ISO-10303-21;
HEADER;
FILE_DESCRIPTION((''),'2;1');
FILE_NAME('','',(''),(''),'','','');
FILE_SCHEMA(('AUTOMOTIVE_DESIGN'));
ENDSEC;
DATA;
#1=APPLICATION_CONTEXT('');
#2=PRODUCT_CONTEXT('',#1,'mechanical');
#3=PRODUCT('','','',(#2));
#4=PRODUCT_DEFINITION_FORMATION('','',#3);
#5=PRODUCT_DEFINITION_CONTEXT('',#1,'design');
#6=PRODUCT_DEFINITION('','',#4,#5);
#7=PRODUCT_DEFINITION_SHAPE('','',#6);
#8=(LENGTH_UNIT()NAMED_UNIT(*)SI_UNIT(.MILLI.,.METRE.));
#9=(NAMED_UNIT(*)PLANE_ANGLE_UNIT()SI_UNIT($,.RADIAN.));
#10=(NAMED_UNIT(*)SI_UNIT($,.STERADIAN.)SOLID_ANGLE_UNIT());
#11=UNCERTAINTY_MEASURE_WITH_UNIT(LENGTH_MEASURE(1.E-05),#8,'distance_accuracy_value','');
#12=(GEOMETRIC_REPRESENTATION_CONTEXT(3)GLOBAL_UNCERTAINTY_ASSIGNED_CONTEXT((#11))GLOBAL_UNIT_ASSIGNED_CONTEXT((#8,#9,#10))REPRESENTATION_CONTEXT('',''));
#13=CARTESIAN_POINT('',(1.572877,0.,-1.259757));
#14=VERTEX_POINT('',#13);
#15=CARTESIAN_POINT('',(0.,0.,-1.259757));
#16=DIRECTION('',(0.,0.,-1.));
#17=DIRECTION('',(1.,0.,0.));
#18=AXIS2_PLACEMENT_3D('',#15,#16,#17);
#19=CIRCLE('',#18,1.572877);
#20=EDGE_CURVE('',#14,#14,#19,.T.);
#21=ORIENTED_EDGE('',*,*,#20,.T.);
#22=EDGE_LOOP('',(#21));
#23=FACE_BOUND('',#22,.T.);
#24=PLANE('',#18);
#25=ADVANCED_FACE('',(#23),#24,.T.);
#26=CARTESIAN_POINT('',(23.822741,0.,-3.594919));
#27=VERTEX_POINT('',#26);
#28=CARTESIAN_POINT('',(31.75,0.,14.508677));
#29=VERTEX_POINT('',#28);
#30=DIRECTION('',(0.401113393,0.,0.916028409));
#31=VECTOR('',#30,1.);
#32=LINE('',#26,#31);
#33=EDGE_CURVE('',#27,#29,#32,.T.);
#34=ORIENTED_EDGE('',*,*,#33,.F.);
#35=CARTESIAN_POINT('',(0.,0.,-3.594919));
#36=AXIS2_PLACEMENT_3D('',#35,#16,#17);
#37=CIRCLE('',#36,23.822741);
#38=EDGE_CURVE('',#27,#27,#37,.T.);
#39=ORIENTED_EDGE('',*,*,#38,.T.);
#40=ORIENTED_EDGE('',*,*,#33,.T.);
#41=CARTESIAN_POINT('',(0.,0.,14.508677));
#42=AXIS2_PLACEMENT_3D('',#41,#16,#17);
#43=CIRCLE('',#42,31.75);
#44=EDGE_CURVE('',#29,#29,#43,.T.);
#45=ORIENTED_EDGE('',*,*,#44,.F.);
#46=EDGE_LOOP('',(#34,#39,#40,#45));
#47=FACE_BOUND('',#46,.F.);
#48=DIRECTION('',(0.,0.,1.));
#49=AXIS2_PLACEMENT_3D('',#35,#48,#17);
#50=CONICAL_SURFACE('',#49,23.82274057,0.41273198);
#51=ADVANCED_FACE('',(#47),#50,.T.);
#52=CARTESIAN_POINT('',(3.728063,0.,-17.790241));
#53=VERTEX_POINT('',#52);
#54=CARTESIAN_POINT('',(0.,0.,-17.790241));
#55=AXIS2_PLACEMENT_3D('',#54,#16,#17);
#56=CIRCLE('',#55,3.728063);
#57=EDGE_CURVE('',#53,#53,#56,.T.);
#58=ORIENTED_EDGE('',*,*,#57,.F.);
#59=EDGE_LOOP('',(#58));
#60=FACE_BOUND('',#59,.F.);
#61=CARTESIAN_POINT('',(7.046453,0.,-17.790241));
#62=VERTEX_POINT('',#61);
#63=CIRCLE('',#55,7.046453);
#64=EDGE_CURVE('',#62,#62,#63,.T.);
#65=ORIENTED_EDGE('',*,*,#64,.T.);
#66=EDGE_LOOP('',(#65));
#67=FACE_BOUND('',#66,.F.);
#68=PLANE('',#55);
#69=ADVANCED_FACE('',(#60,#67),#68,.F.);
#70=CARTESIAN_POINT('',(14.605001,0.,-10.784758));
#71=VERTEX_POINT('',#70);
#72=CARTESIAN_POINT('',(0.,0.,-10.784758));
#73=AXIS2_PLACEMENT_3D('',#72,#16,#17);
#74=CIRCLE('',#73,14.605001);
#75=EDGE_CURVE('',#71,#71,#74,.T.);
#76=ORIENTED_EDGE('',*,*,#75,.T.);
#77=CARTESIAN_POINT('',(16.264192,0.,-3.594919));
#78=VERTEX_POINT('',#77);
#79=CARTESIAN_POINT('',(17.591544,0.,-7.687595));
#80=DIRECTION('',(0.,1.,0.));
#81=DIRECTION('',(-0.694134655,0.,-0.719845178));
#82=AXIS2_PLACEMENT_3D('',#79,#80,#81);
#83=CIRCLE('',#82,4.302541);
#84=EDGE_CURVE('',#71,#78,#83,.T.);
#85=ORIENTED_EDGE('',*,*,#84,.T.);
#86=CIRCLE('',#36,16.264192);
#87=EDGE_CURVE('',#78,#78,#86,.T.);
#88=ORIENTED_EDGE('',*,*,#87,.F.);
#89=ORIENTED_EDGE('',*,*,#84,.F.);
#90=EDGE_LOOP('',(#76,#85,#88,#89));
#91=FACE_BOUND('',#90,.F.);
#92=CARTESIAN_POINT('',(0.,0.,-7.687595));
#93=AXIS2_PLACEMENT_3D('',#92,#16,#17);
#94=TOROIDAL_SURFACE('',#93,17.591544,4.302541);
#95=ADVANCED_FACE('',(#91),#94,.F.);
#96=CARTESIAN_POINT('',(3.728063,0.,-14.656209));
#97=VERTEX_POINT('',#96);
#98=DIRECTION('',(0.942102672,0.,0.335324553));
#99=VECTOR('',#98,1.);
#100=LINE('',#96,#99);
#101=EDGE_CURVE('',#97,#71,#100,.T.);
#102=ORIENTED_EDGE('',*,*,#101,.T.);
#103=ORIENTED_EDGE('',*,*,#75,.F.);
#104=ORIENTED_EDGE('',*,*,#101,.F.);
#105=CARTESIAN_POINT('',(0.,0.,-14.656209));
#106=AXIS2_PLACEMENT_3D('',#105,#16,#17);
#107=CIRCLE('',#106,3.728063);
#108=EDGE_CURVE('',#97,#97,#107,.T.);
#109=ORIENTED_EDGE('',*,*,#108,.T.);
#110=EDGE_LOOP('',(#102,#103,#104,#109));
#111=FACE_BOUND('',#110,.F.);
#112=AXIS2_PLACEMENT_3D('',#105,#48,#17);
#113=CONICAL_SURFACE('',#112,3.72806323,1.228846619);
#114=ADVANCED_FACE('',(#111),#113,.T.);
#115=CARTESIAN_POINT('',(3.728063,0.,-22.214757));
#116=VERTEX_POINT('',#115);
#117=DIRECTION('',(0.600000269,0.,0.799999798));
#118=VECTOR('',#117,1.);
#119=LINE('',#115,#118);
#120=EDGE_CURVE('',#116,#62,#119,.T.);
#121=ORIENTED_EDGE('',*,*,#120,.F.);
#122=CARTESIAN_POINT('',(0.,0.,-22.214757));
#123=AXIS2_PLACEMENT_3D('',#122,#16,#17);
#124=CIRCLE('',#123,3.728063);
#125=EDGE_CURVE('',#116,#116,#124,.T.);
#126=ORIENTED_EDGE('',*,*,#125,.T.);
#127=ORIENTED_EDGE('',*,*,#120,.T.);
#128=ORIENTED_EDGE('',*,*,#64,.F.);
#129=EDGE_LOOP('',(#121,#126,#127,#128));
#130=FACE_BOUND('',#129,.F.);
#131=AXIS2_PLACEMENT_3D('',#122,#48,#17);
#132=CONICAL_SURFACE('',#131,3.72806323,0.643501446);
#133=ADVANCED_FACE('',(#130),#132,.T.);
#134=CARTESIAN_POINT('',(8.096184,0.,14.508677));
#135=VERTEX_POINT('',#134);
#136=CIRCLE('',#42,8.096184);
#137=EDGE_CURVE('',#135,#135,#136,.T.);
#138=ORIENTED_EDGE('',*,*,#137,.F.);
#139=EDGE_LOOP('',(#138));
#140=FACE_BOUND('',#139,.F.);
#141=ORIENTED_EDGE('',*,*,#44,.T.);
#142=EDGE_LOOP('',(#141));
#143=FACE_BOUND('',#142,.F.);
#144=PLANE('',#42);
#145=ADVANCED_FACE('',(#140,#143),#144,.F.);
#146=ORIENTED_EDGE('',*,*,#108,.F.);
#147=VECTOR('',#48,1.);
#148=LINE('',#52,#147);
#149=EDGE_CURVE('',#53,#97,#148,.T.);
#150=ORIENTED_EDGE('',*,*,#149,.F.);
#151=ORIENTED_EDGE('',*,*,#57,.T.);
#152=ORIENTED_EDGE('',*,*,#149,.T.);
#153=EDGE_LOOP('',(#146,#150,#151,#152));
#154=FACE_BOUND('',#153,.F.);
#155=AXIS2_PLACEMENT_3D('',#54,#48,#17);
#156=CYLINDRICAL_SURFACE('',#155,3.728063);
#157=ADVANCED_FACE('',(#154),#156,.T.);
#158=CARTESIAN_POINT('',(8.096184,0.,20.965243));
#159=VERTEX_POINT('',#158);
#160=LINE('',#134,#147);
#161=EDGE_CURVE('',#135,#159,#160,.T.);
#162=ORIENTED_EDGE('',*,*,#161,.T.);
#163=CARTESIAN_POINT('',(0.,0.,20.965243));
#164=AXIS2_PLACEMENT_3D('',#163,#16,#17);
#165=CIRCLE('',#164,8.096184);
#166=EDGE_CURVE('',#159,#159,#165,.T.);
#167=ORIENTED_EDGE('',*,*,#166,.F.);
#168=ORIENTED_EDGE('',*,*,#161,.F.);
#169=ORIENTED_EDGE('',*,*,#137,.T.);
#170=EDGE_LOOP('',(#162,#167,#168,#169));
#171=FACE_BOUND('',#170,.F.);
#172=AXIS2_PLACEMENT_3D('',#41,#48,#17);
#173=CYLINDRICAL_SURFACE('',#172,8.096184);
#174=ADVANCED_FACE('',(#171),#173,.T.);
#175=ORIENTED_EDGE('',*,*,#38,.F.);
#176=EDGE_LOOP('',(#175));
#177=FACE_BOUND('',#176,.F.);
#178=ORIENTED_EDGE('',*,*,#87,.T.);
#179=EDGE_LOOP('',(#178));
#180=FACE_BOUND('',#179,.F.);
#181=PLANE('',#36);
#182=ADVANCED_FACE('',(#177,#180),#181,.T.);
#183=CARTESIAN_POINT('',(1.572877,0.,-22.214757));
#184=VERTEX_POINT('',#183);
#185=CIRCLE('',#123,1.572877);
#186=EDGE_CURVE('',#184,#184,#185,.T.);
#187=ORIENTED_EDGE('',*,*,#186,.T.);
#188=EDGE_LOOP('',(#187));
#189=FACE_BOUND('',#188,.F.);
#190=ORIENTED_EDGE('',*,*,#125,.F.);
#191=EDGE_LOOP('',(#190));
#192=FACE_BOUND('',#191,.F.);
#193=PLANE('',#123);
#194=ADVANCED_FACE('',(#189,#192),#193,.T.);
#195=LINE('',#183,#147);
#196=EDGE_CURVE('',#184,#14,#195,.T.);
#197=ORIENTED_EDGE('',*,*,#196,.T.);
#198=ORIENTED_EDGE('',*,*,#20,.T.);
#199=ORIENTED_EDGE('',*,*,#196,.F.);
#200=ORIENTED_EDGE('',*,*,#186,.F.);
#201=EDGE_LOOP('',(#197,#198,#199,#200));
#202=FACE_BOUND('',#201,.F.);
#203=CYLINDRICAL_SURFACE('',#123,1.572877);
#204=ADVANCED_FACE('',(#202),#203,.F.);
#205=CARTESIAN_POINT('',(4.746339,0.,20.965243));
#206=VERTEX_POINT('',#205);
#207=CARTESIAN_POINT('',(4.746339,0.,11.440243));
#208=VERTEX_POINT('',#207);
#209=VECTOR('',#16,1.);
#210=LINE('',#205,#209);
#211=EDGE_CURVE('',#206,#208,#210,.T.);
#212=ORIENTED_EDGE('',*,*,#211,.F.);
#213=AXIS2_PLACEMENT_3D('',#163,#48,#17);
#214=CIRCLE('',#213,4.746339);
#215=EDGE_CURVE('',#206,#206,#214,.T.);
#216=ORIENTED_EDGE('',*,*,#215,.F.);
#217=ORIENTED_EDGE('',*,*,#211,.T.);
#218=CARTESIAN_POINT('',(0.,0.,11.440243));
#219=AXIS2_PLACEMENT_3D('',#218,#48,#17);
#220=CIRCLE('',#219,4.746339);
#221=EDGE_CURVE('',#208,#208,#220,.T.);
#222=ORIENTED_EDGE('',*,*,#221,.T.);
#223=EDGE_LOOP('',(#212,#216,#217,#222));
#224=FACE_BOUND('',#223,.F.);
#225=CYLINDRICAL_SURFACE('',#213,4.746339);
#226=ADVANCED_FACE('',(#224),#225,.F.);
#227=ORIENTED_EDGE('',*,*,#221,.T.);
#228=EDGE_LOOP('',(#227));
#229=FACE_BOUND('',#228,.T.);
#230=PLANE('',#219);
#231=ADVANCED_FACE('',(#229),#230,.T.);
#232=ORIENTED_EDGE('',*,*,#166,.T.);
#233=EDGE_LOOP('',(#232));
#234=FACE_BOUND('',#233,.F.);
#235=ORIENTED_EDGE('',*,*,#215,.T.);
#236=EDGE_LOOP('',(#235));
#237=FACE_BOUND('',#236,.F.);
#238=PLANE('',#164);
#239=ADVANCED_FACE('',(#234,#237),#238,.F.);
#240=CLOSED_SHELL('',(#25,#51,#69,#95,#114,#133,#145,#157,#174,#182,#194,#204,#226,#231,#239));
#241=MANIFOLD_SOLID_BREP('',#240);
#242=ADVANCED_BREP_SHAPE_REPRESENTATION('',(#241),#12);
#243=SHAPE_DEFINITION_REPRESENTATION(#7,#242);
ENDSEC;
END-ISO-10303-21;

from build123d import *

# Parameters (mm, degrees)
F2_R     = 1.5728770132
F3_DEPTH = 20.955
F4_R     = 4.7463390005
F5_DEPTH = 9.525


# Not quite as in the source:
# - a feature names something its author has since deleted; it is built from what else it names


with BuildPart() as f1:
    # F0 (on Front) → F1 (revolve)
    with BuildSketch(Plane.XZ):
        with BuildLine():
            Line((0, 20.9652427214), (0, 6.7289513536))
            Line((0, 6.7289513536), (0, -22.2147572786))
            Line((0, -22.2147572786), (3.7280632295, -22.2147572786))
            Line((3.7280632295, -22.2147572786), (7.0464526415, -17.7902411669))
            Line((7.0464526415, -17.7902411669), (3.7280632295, -17.7902411669))
            Line((3.7280632295, -17.7902411669), (3.7280632295, -14.6562093869))
            Line((3.7280632295, -14.6562093869), (14.6050014645, -10.7847582549))
            ThreePointArc((14.6050014645, -10.7847582549), (13.3991858149, -6.7201295533), (16.2641917467, -3.5949193407))
            Line((16.2641917467, -3.5949193407), (23.8227405697, -3.5949193407))
            Line((23.8227405697, -3.5949193407), (31.75, 14.5086767152))
            Line((31.75, 14.5086767152), (14.6050014645, 14.5086767152))
            Line((14.6050014645, 14.5086767152), (8.0961844996, 14.5086767152))
            Line((8.0961844996, 14.5086767152), (8.0961844996, 20.9652427214))
            Line((8.0961844996, 20.9652427214), (0, 20.9652427214))
        make_face()
    revolve(axis=Axis((0, 0, -7.7429029625), (0, 0, -1)))

    # F2 (on face) → F3 (cut)
    with BuildSketch(Plane(origin=(0, 0, -22.2147572786), x_dir=(1, 0, 0), z_dir=(0, 0, -1))):
        Circle(F2_R)
    extrude(amount=-F3_DEPTH, mode=Mode.SUBTRACT)

    # F4 (on face) → F5 (cut)
    with BuildSketch(Plane.XY.offset(20.9652427214)):
        Circle(F4_R)
    extrude(amount=-F5_DEPTH, mode=Mode.SUBTRACT)


solid = f1.part
